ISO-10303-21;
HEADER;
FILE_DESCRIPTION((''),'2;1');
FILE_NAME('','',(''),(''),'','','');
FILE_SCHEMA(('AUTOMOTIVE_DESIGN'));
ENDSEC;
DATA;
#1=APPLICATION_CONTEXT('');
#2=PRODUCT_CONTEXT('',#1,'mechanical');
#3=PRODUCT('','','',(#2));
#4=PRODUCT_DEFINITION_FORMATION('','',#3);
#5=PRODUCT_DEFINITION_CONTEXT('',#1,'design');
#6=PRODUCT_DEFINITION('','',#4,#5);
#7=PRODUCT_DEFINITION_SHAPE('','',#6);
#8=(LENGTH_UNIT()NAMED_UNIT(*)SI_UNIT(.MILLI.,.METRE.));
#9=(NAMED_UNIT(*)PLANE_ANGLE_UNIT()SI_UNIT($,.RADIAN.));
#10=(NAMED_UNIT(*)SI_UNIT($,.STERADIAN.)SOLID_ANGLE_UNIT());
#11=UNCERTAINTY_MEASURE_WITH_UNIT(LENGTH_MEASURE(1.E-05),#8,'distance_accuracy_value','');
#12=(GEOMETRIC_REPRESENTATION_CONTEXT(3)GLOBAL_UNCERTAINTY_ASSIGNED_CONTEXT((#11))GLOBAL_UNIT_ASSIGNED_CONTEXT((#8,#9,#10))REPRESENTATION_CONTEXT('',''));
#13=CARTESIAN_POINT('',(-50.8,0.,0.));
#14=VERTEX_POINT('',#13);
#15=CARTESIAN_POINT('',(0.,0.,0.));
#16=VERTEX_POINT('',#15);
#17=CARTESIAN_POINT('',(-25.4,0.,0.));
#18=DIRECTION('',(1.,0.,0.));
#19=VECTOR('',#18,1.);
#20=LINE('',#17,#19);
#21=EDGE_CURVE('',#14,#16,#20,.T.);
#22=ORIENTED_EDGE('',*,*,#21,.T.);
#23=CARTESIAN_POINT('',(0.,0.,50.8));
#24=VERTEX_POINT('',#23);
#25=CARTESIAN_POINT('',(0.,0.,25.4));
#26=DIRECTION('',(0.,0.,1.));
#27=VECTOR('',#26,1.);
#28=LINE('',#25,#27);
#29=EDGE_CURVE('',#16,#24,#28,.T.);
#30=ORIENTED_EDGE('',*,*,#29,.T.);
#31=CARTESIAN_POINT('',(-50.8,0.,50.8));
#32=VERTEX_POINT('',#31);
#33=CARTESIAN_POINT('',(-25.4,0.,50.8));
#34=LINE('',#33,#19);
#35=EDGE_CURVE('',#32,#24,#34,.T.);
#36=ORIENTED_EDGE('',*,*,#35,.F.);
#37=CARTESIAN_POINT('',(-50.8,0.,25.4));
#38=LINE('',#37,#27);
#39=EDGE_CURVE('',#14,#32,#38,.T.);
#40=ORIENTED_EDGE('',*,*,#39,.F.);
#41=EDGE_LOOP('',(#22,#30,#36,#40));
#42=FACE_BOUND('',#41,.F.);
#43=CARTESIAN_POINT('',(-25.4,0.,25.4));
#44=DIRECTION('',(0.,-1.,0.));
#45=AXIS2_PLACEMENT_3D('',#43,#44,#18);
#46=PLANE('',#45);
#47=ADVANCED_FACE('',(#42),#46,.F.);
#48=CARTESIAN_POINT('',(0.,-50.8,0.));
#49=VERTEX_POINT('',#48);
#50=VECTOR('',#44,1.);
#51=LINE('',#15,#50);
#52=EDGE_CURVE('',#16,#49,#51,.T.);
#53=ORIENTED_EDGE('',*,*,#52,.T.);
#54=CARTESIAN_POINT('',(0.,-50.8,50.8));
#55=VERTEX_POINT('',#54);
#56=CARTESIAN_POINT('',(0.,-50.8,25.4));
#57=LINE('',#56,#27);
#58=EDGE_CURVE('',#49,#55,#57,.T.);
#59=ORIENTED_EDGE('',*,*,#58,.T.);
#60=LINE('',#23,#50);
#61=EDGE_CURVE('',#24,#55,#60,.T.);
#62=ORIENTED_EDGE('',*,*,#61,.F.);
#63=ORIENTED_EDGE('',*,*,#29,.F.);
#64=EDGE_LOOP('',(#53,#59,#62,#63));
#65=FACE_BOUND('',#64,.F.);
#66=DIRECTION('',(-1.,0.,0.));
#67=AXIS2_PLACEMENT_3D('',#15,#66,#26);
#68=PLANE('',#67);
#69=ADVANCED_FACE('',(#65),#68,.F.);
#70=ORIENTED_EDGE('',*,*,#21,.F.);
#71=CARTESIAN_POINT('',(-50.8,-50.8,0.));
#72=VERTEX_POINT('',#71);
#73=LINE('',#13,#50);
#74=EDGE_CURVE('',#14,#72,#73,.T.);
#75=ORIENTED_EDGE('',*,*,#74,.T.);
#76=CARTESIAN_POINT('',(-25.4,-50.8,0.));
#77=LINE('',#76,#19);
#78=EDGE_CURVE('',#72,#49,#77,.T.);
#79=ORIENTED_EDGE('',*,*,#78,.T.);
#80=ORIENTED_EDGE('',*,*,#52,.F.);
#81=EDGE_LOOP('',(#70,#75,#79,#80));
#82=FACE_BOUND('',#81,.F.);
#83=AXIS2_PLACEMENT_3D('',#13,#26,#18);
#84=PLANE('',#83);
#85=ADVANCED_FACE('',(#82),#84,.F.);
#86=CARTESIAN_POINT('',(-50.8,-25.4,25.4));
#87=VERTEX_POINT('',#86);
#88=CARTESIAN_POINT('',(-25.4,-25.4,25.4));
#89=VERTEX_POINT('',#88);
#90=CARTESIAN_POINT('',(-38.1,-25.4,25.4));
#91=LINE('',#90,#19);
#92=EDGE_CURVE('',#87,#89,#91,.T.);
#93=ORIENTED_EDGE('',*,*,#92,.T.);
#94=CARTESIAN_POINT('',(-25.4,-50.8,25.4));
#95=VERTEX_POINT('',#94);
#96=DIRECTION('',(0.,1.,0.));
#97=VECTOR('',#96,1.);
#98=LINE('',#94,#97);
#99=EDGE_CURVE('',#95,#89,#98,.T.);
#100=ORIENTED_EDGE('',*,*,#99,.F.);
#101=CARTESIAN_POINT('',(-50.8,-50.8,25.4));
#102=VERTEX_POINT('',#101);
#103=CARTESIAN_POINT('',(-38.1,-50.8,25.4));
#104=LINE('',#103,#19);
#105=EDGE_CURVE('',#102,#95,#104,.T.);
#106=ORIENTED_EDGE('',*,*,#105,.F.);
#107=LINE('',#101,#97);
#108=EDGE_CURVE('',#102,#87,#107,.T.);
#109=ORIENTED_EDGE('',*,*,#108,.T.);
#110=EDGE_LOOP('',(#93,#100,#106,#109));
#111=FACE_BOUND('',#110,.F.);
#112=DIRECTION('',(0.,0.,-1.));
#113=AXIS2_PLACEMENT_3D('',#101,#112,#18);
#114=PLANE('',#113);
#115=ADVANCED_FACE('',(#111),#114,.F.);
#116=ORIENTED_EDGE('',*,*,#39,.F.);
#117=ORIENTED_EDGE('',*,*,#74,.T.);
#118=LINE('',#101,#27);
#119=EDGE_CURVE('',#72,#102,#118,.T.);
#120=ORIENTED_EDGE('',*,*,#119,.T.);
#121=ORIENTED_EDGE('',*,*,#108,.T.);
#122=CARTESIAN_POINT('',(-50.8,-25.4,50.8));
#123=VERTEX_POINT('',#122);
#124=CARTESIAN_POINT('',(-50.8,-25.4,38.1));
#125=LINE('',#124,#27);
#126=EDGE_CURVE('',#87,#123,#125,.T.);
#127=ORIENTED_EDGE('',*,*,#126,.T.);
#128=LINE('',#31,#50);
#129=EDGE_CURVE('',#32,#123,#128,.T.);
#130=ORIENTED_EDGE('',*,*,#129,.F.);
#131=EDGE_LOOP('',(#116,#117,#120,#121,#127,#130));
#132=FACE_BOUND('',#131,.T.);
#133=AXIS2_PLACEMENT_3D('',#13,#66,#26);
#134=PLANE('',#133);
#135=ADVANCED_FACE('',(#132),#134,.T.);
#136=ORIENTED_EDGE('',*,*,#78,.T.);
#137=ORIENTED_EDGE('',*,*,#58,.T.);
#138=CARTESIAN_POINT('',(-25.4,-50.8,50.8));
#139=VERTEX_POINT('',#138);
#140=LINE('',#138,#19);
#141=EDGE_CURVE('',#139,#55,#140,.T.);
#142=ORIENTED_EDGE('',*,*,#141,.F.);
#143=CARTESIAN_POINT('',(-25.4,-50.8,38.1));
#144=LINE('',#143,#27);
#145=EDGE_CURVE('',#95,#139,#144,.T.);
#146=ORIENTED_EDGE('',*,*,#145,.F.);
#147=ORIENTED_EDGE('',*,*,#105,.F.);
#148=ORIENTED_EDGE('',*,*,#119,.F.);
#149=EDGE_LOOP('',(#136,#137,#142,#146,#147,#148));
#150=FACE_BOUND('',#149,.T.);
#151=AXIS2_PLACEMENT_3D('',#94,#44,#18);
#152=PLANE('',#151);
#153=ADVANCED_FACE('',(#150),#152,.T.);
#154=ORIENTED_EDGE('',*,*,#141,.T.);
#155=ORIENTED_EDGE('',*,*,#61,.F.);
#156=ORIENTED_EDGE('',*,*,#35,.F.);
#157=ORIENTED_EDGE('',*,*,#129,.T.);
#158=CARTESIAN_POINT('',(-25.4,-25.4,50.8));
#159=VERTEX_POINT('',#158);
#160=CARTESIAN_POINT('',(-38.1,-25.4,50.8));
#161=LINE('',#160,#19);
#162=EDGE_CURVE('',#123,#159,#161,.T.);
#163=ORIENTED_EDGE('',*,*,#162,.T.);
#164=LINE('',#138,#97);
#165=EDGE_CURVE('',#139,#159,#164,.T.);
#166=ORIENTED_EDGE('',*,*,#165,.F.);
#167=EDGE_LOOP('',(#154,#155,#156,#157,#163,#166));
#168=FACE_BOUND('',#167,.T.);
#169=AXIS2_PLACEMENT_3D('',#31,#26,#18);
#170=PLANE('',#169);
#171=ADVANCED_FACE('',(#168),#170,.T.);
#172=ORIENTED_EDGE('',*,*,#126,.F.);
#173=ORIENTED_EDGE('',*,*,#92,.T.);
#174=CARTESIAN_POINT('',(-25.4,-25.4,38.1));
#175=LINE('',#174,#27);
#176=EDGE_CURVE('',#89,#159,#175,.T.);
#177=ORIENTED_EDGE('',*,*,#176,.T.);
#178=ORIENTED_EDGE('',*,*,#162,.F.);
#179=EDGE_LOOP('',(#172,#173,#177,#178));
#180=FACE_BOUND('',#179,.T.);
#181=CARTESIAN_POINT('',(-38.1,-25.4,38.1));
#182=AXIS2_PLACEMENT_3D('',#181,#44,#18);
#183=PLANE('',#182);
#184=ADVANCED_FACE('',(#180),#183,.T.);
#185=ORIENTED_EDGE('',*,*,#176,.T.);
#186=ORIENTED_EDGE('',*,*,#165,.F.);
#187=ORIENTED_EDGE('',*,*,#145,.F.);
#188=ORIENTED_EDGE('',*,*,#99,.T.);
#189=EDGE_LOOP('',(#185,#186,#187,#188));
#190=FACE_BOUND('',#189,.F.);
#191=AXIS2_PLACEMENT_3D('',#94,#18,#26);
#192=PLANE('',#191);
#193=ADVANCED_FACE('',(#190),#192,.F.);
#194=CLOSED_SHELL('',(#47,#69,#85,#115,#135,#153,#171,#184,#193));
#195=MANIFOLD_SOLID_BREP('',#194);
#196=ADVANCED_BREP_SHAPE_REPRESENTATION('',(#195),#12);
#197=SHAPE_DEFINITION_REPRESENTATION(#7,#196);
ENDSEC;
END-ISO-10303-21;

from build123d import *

# Parameters (mm, degrees)
F0_W     = 50.8
F0_H     = 50.8
F1_DEPTH = 50.8
F2_W     = 25.4
F2_H     = 25.4
F3_DEPTH = 25.4


# Not quite as in the source:
# - a feature names something its author has since deleted; it is built from what else it names


with BuildPart() as f1:
    # F0 (on Front) → F1 (new body)
    with BuildSketch(Plane.XZ):
        with Locations((-25.4, 25.4)):
            Rectangle(F0_W, F0_H)
    extrude(amount=F1_DEPTH)

    # F2 (on face) → F3 (cut)
    with BuildSketch(Plane.XZ.offset(50.8)):
        with Locations((-38.1, 38.1)):
            Rectangle(F2_W, F2_H)
    extrude(amount=-F3_DEPTH, mode=Mode.SUBTRACT)


solid = f1.part
